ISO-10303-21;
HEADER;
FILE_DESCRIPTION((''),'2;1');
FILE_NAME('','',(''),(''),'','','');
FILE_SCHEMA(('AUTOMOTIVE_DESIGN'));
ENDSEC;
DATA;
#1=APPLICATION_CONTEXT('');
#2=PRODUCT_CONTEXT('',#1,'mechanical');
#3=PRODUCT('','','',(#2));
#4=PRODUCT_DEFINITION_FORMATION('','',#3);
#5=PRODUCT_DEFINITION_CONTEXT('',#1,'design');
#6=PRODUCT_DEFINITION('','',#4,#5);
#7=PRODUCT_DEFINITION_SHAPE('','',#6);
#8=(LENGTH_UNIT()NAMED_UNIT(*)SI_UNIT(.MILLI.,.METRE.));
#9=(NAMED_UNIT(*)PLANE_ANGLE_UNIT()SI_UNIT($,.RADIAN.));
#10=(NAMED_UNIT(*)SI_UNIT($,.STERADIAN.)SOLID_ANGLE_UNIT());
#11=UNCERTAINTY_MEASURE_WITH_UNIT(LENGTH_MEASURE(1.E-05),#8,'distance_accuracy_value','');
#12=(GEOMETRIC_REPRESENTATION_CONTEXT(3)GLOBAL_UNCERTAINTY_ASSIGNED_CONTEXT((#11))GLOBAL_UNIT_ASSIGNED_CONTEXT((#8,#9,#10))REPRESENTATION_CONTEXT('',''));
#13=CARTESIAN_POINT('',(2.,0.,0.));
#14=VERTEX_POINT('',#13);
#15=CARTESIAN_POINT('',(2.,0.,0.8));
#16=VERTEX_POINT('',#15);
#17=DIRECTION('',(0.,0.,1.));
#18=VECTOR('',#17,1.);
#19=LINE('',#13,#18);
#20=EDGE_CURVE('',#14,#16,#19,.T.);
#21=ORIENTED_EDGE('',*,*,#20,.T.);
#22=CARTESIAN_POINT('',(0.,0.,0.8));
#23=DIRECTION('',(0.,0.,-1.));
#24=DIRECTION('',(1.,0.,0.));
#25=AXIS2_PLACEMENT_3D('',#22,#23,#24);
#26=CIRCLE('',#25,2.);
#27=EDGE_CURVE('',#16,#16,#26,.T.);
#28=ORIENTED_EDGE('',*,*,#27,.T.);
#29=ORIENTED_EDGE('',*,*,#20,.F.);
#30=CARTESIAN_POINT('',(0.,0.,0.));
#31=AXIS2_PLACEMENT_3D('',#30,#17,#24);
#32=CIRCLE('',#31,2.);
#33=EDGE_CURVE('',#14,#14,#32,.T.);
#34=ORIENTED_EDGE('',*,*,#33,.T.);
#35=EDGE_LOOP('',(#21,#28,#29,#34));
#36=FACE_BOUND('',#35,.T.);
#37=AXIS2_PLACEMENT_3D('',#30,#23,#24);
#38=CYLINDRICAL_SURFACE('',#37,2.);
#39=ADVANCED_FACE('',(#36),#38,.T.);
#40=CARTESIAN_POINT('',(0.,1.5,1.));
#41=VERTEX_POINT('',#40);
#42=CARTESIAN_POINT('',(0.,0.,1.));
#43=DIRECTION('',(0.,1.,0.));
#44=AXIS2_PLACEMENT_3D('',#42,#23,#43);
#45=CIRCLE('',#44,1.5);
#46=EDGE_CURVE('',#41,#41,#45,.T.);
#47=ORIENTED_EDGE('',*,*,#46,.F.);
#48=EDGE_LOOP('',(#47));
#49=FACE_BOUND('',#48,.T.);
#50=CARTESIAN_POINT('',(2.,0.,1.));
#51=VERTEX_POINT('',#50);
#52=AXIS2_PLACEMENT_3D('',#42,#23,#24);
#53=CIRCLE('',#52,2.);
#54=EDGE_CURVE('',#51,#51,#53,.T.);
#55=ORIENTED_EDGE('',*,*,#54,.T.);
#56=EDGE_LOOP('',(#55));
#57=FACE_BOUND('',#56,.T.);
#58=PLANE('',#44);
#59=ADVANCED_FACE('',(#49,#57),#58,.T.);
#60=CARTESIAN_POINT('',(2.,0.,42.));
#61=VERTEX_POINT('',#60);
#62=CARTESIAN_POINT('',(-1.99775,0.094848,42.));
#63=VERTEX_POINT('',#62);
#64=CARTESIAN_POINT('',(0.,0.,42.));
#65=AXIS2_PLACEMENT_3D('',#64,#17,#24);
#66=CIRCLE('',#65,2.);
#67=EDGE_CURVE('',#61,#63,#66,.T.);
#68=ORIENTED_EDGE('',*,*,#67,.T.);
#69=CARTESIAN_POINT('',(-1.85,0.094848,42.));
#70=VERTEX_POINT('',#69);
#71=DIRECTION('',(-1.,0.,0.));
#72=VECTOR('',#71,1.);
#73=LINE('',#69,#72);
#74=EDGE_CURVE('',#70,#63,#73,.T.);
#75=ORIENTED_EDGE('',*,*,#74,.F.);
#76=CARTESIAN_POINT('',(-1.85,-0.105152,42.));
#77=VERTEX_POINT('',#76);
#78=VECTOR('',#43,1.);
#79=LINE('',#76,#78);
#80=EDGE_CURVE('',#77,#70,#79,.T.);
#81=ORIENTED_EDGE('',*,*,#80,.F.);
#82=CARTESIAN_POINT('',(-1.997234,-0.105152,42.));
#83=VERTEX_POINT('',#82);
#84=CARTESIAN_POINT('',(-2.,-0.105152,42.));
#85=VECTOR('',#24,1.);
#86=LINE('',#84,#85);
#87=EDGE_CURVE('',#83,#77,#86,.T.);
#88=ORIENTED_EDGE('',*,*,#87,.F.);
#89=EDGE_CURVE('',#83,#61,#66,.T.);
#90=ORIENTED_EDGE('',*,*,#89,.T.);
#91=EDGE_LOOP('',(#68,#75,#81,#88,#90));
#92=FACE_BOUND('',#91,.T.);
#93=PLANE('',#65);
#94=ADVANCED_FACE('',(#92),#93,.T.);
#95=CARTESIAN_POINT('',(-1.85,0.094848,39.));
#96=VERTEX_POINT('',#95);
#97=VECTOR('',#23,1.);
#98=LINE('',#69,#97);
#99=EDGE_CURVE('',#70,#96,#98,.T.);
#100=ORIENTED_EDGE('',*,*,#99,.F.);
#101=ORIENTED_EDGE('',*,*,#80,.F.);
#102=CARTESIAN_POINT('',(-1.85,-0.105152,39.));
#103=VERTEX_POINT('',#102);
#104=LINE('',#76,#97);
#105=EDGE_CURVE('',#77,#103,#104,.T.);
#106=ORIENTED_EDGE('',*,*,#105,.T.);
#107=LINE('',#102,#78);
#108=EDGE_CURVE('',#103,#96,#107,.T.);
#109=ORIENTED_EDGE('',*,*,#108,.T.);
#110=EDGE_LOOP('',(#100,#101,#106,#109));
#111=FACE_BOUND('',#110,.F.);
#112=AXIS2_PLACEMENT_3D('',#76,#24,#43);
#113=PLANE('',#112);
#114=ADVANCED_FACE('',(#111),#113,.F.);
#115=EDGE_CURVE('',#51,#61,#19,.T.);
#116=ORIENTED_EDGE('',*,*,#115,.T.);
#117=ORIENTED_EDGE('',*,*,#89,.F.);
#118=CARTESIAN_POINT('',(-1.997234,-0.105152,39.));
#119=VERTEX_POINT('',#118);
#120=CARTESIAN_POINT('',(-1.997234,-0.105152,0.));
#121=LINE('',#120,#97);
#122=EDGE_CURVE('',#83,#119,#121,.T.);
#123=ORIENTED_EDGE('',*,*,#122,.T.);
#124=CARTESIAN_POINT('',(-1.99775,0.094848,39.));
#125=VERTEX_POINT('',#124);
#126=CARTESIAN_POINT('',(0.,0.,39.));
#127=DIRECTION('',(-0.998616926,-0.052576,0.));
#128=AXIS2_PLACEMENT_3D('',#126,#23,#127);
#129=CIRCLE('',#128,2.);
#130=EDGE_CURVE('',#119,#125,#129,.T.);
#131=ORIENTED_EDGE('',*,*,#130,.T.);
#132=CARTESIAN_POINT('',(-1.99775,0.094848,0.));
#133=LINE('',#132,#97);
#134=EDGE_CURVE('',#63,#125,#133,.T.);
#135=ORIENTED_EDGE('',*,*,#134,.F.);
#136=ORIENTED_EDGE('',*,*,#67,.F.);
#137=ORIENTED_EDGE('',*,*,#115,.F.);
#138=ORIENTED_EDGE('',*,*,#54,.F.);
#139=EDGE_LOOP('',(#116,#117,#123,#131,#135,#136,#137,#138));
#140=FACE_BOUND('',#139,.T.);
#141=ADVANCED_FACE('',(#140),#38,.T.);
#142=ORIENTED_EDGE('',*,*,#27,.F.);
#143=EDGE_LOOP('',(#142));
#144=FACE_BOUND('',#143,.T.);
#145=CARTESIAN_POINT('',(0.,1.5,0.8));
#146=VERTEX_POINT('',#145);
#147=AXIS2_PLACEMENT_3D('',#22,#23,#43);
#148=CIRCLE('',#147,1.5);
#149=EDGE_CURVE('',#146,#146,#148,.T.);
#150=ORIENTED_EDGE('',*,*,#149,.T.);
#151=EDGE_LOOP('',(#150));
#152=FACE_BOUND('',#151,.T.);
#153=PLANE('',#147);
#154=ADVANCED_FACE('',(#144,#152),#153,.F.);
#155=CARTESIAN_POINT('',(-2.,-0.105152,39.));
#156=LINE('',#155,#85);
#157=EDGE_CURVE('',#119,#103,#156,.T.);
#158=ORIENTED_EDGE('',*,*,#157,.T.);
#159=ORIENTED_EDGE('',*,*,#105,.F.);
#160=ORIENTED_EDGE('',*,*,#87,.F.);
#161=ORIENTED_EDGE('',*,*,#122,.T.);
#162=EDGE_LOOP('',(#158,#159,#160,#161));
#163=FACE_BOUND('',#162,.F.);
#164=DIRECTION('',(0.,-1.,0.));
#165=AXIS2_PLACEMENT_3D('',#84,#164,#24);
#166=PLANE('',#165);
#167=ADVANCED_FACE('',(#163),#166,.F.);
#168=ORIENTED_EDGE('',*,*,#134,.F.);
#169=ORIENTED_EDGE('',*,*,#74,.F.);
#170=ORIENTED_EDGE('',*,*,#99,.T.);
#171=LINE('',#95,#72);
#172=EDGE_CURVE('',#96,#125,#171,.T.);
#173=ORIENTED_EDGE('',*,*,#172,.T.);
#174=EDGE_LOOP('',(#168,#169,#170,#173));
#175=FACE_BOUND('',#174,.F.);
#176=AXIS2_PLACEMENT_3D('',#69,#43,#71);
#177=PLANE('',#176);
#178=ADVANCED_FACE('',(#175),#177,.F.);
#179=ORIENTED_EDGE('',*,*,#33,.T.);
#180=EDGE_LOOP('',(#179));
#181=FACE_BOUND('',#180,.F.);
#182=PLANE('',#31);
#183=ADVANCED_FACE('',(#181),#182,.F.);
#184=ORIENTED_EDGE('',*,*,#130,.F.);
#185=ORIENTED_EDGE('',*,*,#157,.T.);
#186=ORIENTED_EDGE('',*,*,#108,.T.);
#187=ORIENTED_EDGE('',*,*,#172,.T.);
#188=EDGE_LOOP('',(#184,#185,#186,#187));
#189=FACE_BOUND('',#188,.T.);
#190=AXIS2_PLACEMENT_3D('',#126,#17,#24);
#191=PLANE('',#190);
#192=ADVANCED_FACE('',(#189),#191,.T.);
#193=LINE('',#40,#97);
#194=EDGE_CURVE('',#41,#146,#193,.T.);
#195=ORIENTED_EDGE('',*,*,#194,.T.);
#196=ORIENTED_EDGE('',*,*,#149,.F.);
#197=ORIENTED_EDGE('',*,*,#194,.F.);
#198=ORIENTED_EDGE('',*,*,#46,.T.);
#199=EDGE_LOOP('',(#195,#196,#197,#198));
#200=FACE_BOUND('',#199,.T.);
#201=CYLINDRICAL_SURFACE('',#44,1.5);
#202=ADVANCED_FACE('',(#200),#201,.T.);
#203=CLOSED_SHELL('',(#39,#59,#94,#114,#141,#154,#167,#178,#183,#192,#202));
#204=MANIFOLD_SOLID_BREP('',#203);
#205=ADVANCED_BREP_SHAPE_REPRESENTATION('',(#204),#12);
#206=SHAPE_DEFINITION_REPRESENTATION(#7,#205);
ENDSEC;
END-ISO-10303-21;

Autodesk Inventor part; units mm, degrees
ref_plane "YZ Plane" through (0, 0, 0) normal (1, 0, 0) x (0, 1, 0)
ref_plane "XZ Plane" through (0, 0, 0) normal (0, 1, 0) x (-1, 0, 0)
ref_plane "XY Plane" through (0, 0, 0) normal (0, 0, 1) x (1, 0, 0)
sketch "Sketch1" plane through (0, 0, 0) normal (0, 0, 1) x (1, 0, 0)
  circle A0 centre (0, 0) radius 2
  dimension "d0" = 4
extrude "Extrusion1" add sketch "Sketch1" along normal blind 42
sketch "Sketch2" plane through (0, 0, 0) normal (1, 0, 0) x (0, 1, 0)
  line L0 (2, 1) -> (1.5, 1)
  line L1 (1.5, 1) -> (1.5, 0.8)
  line L2 (1.5, 0.8) -> (2, 0.8)
  line L3 (2, 0.8) -> (2, 1)
  line L4 (2, 42) -> (-2, 42)
  line L5 (-2, 0) -> (2, 0)
  line L6 (0, 0) -> (0, -0.918423) construction
  dimension "d3" = 0.5
  dimension "d4" = 0.2
  dimension "d5" = 0.8
  dimension "d6" = 1.5
revolve "Revolution1" cut sketch "Sketch2" angle 360 about axis through (0, 0, 0) along (0, 0, -1)
sketch "Sketch4" plane through (0, 0, 42) normal (0, 0, 1) x (1, 0, 0)
  line L0 (0, 0) -> (-2, 0) construction
  circle A0 centre (0, 0) radius 2
  line L1 (-2, -0.105152) -> (-1.85, -0.105152)
  line L2 (-1.85, -0.105152) -> (-1.85, 0.094848)
  line L3 (-1.85, 0.094848) -> (-2, 0.094848)
  line L4 (-2, 0.094848) -> (-2, -0.105152)
  dimension "d10" = 0.2
  dimension "d11" = 0.15
sketch "Sketch4 outline for Extrusion2" plane through (0, 0, 42) normal (0, 0, 1) x (1, 0, 0)
  line L0 (-2, 0.094848) -> (-2, 0)
  line L1 (-1.85, 0.094848) -> (-2, 0.094848)
  line L2 (-1.85, -0.105152) -> (-1.85, 0.094848)
  line L3 (-2, -0.105152) -> (-1.85, -0.105152)
  line L4 (-2, 0) -> (-2, -0.105152)
extrude "Extrusion2" cut sketch "Sketch4 outline for Extrusion2" against normal blind 3
properties part number "Axle"
